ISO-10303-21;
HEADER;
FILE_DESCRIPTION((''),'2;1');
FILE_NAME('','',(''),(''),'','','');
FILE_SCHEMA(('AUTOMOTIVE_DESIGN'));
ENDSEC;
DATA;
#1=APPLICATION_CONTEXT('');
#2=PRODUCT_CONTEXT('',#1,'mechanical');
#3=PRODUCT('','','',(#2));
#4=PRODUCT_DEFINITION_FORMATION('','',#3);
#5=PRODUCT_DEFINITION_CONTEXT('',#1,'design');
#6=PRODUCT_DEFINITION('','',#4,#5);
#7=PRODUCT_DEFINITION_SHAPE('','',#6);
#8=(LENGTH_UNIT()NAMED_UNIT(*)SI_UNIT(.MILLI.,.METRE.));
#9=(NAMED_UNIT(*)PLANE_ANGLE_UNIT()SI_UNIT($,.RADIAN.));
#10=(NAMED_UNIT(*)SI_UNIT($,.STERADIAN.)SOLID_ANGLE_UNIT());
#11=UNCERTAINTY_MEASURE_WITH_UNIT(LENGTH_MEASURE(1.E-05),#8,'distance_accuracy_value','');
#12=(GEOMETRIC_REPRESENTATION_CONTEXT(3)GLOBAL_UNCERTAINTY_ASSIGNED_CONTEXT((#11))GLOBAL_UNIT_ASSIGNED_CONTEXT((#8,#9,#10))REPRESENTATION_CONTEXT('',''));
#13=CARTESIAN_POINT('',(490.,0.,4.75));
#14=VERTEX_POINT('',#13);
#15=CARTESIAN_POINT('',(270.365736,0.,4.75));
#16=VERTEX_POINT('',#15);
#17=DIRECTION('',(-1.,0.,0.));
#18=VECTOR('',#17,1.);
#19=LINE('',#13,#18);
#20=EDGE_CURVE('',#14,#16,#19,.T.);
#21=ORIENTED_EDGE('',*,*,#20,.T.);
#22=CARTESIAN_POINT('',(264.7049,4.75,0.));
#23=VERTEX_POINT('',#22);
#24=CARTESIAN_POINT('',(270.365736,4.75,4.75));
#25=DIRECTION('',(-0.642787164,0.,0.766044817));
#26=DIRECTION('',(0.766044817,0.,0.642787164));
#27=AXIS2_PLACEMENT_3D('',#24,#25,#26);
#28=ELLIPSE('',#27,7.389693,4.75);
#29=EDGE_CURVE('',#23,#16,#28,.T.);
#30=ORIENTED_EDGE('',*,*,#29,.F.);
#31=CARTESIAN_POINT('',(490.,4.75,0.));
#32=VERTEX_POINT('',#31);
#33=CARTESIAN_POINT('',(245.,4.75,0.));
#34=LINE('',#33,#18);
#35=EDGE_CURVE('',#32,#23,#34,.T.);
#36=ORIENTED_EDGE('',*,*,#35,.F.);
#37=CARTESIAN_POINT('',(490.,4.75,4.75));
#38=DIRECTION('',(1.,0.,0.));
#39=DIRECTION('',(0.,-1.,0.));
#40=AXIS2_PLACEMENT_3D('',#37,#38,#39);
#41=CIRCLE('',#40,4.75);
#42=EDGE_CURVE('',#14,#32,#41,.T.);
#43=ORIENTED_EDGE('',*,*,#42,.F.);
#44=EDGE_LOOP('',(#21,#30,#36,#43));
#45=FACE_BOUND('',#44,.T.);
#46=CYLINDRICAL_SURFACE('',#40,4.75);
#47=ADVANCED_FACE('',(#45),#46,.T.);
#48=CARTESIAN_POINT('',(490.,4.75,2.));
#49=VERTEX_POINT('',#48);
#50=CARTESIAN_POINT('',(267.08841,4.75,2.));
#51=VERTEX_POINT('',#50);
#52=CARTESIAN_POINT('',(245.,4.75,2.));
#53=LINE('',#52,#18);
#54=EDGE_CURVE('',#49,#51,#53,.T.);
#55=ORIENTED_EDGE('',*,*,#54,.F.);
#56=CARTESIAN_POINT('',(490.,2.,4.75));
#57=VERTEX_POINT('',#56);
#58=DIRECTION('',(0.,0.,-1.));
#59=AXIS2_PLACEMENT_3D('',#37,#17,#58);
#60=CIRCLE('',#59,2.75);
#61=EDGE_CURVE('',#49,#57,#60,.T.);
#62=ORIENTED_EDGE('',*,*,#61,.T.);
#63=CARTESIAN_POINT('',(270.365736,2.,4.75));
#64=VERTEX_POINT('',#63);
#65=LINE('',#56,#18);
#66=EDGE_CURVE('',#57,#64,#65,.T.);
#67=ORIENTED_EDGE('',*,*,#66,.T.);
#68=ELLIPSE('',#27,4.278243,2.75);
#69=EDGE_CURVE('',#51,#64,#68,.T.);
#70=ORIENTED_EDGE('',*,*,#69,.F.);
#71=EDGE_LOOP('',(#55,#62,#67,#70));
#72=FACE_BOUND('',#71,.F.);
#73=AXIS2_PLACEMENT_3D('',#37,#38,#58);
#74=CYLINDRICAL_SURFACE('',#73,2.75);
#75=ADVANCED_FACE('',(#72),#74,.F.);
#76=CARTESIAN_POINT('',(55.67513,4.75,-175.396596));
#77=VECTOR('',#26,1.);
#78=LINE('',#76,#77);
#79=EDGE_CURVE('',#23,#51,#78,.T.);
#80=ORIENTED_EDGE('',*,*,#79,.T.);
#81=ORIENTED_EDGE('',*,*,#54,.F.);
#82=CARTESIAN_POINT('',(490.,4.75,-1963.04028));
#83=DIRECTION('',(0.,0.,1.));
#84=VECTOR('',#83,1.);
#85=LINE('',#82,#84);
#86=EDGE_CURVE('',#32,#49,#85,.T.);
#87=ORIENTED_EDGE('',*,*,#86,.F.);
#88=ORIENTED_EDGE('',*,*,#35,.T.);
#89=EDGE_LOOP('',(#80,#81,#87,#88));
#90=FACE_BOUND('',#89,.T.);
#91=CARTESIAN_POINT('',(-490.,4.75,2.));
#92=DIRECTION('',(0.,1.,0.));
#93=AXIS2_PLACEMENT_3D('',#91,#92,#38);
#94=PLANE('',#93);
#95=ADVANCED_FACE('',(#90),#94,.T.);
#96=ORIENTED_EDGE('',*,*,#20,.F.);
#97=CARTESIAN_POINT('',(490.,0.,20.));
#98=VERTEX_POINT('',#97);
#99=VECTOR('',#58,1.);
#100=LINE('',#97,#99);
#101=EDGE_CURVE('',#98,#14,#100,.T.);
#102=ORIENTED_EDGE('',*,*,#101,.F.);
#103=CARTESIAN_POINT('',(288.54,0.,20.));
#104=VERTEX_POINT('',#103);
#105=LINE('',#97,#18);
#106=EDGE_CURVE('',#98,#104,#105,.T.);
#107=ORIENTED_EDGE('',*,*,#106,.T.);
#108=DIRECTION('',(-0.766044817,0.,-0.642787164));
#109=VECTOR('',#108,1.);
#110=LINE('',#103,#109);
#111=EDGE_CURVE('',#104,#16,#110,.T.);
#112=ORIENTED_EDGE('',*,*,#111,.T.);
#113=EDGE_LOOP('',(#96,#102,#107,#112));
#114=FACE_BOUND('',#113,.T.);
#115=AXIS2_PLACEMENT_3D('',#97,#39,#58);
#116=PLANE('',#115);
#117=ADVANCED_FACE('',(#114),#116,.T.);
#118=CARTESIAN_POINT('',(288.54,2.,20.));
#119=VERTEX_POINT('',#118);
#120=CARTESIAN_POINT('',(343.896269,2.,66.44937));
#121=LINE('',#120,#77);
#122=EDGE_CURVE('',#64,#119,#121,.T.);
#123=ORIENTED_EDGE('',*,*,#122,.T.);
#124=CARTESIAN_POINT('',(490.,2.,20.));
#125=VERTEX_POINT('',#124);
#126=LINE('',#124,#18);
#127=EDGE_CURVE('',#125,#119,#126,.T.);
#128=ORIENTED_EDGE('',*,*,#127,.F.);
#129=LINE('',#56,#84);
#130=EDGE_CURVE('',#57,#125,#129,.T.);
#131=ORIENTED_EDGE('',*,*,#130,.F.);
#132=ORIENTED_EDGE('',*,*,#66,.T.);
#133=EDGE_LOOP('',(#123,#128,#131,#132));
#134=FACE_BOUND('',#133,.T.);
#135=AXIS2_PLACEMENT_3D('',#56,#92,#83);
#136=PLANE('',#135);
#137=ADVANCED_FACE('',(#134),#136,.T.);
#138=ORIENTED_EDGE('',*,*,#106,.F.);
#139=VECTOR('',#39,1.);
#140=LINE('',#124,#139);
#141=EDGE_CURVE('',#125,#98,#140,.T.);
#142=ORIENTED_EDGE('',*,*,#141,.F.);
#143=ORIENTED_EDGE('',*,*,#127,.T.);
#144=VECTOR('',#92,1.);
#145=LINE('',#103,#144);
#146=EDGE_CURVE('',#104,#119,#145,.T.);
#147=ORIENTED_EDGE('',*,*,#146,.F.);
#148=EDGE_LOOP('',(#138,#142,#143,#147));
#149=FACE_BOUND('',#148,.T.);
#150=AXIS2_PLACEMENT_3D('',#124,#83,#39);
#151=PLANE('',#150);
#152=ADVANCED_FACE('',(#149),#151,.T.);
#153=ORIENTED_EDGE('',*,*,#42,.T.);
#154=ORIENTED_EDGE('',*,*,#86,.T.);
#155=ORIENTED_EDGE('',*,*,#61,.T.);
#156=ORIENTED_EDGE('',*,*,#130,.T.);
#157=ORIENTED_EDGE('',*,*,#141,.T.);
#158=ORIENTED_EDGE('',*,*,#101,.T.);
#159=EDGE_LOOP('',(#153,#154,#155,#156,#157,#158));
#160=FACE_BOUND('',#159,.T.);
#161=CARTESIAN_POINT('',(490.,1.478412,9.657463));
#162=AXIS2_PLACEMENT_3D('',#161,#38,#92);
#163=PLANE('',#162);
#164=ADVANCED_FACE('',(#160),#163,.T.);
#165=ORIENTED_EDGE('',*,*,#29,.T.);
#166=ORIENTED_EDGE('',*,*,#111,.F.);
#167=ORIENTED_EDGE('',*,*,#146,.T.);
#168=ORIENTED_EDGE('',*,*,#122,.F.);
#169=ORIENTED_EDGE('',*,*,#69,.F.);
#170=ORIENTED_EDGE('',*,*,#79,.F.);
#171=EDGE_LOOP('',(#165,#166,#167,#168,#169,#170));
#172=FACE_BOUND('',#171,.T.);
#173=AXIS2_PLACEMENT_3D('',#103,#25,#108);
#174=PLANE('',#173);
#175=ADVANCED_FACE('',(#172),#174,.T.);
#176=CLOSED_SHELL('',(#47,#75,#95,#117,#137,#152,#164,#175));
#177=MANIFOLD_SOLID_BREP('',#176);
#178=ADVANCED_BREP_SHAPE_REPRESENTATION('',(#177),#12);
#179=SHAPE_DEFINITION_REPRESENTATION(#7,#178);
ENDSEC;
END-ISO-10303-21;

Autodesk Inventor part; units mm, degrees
ref_plane "YZ Plane" through (0, 0, 0) normal (1, 0, 0) x (0, 1, 0)
ref_plane "XZ Plane" through (0, 0, 0) normal (0, 1, 0) x (-1, 0, 0)
ref_plane "XY Plane" through (0, 0, 0) normal (0, 0, 1) x (1, 0, 0)
sketch "Sketch1" plane through (0, 0, 0) normal (0, 0, 1) x (1, 0, 0)
  line L0 (-490, 40) -> (490, 40)
  line L1 (490, 40) -> (490, 0)
  line L2 (490, 0) -> (-490, 0)
  line L3 (-490, 0) -> (-490, 40)
  point P0 (0, 0)
  point P1 (0, 0)
  dimension "d0" = 980
  dimension "d1" = 40
extrude "Plate1" add sketch "Sketch1" along normal blind 2
sketch "Sketch2" plane through (490, 2, 0) normal (0, -1, 0) x (1, 0, 0)
  line L0 (-980, 0) -> (0, 0)
  line L1 (0, 0) -> (0, 20)
  line L2 (0, 20) -> (-980, 20)
  line L3 (-980, 20) -> (-980, 0)
edge flange "Flange1" height 20 angle 90 thickness 2 bend radius 2.75 thickness toward (0, -1, 0) relief round relief width 2 relief depth 1 edges at (0, 0, 2) wall of the first edge with corners at (-490, 2, 0) (490, 2, 0) (490, 2, 20) (-490, 2, 20)
bend "Bend1"
corner "Corner1"
sketch "Sketch9" plane through (0, 0, 2) normal (0, 0, 1) x (1, 0, 0)
  line L0 (-490, 4.75) -> (490, 4.75) projected
  line L1 (490, 40) -> (490, 4.75) projected
  line L2 (-490, 40) -> (490, 40) projected
  line L3 (-490, 4.75) -> (-490, 40) projected
  line L4 (0, 0) -> (0, 40) construction
  circle A0 centre (0, 40) radius 35
  circle A1 centre (490, 40) radius 35
  circle A2 centre (-490, 40) radius 35
  line L5 (246.05, 40) -> (243.95, 40)
  line L6 (243.95, 40) -> (243.95, 29)
  line L7 (243.95, 29) -> (246.05, 29)
  line L8 (246.05, 29) -> (246.05, 40)
  line L9 (-490, 40) -> (490, 40) projected
  line L10 (-246.05, 40) -> (-243.95, 40)
  line L11 (-243.95, 40) -> (-243.95, 29)
  line L12 (-243.95, 29) -> (-246.05, 29)
  line L13 (-246.05, 29) -> (-246.05, 40)
  line L14 (-490, 0) -> (490, 0) projected
  point P0 (-245, 29)
  point P1 (245, 29)
  point P2 (-243.95, 40)
  point P3 (-246.05, 40)
  point P4 (7.2068, 4.75)
  point P5 (35, 40)
  point P6 (-35, 40)
  point P7 (-7.2068, 4.75)
  point P8 (455, 40)
  point P9 (482.7932, 4.75)
  point P10 (-482.7932, 4.75)
  point P11 (-455, 40)
  point P12 (-490, 5)
  dimension "d41" = 70
  dimension "d42" = 490
  dimension "d43" = 2.1
  dimension "d44" = 29
  dimension "d45" = 11
extrude "Extrusion4" cut sketch "Sketch9" along normal through all both and the other way through all contours L3 A2 L2 L13 L12 L11 A0 L6 L7 L8 A1 L1 L0 | A2 L2 L3 | L3 L2 A2 | A1 L2 L1 | L2 L11 L12 L13 | L8 L7 L6 L2 | A0 L2 | L2 A0 picked at (473.6046, 23.6046)
sketch "Sketch10" plane through (0, 0, 2) normal (0, 0, 1) x (1, 0, 0)
  line L0 (483.1891, 23.5318) -> (483.1891, 11.5318) construction
  line L1 (483.1891, 11.5318) -> (283.1891, 11.5318) construction
  line L2 (283.1891, 11.5318) -> (283.1891, 23.5318) construction
  line L3 (283.1891, 23.5318) -> (483.1891, 23.5318) construction
  point P0 (0, 0)
  dimension "d48" = 200
  dimension "d49" = 12
feature "Mark2" [suppressed]
sketch "Sketch11" plane through (-490, 0, 20) normal (0, -1, 0) x (1, 0, 0)
  line L0 (0, -15.25) -> (0, -20) projected
  line L1 (0, 0) -> (980, 0) projected
  line L2 (0, -20) -> (778.54, -20)
  line L3 (778.54, -20) -> (778.54, 0)
  line L4 (778.54, 0) -> (0, 0)
  line L5 (0, 0) -> (0, -20)
  line L6 (778.54, 0) -> (754.7049, -20)
  line L7 (980, -20) -> (497.2068, -20) projected
  dimension "d50" = 778.54
  dimension "d51" = 50
extrude "Extrusion5" cut sketch "Sketch11" against normal through all contours L5 L1 L6 L2 L0
equation "\"d1\" = БОРТ_стрингер_4_высота"
equation "\"d2\" = Thickness"
equation "\"d3\" = BendReliefWidth"
equation "\"d4\" = BendReliefDepth"
equation "\"d5\" = MinimumRemnant"
equation "\"d6\" = TransitionRadius"
equation "\"d9\" = BendRadius"
equation "\"d10\" = CornerReliefSize"
equation "\"d11\" = GapSize"
equation "\"d12\" = JacobiRadiusSize"
equation "\"BendReliefWidth\" = Thickness"
equation "\"BendReliefDepth\" = 0.5 * Thickness"
equation "\"CornerReliefSize\" = 4 * Thickness"
equation "\"MinimumRemnant\" = 2 * Thickness"
equation "\"TransitionRadius\" = BendRadius"
equation "\"JacobiRadiusSize\" = BendRadius"
equation "\"GapSize\" = Thickness"
equation "\"БОРТ_стрингер_4_высота\" = 40"
equation "\"Thickness\" = 2"
equation "\"BendRadius\" = 2.75"
properties part number "MSC 328 STRINGER BOARD ##" material "Stainless Steel"
